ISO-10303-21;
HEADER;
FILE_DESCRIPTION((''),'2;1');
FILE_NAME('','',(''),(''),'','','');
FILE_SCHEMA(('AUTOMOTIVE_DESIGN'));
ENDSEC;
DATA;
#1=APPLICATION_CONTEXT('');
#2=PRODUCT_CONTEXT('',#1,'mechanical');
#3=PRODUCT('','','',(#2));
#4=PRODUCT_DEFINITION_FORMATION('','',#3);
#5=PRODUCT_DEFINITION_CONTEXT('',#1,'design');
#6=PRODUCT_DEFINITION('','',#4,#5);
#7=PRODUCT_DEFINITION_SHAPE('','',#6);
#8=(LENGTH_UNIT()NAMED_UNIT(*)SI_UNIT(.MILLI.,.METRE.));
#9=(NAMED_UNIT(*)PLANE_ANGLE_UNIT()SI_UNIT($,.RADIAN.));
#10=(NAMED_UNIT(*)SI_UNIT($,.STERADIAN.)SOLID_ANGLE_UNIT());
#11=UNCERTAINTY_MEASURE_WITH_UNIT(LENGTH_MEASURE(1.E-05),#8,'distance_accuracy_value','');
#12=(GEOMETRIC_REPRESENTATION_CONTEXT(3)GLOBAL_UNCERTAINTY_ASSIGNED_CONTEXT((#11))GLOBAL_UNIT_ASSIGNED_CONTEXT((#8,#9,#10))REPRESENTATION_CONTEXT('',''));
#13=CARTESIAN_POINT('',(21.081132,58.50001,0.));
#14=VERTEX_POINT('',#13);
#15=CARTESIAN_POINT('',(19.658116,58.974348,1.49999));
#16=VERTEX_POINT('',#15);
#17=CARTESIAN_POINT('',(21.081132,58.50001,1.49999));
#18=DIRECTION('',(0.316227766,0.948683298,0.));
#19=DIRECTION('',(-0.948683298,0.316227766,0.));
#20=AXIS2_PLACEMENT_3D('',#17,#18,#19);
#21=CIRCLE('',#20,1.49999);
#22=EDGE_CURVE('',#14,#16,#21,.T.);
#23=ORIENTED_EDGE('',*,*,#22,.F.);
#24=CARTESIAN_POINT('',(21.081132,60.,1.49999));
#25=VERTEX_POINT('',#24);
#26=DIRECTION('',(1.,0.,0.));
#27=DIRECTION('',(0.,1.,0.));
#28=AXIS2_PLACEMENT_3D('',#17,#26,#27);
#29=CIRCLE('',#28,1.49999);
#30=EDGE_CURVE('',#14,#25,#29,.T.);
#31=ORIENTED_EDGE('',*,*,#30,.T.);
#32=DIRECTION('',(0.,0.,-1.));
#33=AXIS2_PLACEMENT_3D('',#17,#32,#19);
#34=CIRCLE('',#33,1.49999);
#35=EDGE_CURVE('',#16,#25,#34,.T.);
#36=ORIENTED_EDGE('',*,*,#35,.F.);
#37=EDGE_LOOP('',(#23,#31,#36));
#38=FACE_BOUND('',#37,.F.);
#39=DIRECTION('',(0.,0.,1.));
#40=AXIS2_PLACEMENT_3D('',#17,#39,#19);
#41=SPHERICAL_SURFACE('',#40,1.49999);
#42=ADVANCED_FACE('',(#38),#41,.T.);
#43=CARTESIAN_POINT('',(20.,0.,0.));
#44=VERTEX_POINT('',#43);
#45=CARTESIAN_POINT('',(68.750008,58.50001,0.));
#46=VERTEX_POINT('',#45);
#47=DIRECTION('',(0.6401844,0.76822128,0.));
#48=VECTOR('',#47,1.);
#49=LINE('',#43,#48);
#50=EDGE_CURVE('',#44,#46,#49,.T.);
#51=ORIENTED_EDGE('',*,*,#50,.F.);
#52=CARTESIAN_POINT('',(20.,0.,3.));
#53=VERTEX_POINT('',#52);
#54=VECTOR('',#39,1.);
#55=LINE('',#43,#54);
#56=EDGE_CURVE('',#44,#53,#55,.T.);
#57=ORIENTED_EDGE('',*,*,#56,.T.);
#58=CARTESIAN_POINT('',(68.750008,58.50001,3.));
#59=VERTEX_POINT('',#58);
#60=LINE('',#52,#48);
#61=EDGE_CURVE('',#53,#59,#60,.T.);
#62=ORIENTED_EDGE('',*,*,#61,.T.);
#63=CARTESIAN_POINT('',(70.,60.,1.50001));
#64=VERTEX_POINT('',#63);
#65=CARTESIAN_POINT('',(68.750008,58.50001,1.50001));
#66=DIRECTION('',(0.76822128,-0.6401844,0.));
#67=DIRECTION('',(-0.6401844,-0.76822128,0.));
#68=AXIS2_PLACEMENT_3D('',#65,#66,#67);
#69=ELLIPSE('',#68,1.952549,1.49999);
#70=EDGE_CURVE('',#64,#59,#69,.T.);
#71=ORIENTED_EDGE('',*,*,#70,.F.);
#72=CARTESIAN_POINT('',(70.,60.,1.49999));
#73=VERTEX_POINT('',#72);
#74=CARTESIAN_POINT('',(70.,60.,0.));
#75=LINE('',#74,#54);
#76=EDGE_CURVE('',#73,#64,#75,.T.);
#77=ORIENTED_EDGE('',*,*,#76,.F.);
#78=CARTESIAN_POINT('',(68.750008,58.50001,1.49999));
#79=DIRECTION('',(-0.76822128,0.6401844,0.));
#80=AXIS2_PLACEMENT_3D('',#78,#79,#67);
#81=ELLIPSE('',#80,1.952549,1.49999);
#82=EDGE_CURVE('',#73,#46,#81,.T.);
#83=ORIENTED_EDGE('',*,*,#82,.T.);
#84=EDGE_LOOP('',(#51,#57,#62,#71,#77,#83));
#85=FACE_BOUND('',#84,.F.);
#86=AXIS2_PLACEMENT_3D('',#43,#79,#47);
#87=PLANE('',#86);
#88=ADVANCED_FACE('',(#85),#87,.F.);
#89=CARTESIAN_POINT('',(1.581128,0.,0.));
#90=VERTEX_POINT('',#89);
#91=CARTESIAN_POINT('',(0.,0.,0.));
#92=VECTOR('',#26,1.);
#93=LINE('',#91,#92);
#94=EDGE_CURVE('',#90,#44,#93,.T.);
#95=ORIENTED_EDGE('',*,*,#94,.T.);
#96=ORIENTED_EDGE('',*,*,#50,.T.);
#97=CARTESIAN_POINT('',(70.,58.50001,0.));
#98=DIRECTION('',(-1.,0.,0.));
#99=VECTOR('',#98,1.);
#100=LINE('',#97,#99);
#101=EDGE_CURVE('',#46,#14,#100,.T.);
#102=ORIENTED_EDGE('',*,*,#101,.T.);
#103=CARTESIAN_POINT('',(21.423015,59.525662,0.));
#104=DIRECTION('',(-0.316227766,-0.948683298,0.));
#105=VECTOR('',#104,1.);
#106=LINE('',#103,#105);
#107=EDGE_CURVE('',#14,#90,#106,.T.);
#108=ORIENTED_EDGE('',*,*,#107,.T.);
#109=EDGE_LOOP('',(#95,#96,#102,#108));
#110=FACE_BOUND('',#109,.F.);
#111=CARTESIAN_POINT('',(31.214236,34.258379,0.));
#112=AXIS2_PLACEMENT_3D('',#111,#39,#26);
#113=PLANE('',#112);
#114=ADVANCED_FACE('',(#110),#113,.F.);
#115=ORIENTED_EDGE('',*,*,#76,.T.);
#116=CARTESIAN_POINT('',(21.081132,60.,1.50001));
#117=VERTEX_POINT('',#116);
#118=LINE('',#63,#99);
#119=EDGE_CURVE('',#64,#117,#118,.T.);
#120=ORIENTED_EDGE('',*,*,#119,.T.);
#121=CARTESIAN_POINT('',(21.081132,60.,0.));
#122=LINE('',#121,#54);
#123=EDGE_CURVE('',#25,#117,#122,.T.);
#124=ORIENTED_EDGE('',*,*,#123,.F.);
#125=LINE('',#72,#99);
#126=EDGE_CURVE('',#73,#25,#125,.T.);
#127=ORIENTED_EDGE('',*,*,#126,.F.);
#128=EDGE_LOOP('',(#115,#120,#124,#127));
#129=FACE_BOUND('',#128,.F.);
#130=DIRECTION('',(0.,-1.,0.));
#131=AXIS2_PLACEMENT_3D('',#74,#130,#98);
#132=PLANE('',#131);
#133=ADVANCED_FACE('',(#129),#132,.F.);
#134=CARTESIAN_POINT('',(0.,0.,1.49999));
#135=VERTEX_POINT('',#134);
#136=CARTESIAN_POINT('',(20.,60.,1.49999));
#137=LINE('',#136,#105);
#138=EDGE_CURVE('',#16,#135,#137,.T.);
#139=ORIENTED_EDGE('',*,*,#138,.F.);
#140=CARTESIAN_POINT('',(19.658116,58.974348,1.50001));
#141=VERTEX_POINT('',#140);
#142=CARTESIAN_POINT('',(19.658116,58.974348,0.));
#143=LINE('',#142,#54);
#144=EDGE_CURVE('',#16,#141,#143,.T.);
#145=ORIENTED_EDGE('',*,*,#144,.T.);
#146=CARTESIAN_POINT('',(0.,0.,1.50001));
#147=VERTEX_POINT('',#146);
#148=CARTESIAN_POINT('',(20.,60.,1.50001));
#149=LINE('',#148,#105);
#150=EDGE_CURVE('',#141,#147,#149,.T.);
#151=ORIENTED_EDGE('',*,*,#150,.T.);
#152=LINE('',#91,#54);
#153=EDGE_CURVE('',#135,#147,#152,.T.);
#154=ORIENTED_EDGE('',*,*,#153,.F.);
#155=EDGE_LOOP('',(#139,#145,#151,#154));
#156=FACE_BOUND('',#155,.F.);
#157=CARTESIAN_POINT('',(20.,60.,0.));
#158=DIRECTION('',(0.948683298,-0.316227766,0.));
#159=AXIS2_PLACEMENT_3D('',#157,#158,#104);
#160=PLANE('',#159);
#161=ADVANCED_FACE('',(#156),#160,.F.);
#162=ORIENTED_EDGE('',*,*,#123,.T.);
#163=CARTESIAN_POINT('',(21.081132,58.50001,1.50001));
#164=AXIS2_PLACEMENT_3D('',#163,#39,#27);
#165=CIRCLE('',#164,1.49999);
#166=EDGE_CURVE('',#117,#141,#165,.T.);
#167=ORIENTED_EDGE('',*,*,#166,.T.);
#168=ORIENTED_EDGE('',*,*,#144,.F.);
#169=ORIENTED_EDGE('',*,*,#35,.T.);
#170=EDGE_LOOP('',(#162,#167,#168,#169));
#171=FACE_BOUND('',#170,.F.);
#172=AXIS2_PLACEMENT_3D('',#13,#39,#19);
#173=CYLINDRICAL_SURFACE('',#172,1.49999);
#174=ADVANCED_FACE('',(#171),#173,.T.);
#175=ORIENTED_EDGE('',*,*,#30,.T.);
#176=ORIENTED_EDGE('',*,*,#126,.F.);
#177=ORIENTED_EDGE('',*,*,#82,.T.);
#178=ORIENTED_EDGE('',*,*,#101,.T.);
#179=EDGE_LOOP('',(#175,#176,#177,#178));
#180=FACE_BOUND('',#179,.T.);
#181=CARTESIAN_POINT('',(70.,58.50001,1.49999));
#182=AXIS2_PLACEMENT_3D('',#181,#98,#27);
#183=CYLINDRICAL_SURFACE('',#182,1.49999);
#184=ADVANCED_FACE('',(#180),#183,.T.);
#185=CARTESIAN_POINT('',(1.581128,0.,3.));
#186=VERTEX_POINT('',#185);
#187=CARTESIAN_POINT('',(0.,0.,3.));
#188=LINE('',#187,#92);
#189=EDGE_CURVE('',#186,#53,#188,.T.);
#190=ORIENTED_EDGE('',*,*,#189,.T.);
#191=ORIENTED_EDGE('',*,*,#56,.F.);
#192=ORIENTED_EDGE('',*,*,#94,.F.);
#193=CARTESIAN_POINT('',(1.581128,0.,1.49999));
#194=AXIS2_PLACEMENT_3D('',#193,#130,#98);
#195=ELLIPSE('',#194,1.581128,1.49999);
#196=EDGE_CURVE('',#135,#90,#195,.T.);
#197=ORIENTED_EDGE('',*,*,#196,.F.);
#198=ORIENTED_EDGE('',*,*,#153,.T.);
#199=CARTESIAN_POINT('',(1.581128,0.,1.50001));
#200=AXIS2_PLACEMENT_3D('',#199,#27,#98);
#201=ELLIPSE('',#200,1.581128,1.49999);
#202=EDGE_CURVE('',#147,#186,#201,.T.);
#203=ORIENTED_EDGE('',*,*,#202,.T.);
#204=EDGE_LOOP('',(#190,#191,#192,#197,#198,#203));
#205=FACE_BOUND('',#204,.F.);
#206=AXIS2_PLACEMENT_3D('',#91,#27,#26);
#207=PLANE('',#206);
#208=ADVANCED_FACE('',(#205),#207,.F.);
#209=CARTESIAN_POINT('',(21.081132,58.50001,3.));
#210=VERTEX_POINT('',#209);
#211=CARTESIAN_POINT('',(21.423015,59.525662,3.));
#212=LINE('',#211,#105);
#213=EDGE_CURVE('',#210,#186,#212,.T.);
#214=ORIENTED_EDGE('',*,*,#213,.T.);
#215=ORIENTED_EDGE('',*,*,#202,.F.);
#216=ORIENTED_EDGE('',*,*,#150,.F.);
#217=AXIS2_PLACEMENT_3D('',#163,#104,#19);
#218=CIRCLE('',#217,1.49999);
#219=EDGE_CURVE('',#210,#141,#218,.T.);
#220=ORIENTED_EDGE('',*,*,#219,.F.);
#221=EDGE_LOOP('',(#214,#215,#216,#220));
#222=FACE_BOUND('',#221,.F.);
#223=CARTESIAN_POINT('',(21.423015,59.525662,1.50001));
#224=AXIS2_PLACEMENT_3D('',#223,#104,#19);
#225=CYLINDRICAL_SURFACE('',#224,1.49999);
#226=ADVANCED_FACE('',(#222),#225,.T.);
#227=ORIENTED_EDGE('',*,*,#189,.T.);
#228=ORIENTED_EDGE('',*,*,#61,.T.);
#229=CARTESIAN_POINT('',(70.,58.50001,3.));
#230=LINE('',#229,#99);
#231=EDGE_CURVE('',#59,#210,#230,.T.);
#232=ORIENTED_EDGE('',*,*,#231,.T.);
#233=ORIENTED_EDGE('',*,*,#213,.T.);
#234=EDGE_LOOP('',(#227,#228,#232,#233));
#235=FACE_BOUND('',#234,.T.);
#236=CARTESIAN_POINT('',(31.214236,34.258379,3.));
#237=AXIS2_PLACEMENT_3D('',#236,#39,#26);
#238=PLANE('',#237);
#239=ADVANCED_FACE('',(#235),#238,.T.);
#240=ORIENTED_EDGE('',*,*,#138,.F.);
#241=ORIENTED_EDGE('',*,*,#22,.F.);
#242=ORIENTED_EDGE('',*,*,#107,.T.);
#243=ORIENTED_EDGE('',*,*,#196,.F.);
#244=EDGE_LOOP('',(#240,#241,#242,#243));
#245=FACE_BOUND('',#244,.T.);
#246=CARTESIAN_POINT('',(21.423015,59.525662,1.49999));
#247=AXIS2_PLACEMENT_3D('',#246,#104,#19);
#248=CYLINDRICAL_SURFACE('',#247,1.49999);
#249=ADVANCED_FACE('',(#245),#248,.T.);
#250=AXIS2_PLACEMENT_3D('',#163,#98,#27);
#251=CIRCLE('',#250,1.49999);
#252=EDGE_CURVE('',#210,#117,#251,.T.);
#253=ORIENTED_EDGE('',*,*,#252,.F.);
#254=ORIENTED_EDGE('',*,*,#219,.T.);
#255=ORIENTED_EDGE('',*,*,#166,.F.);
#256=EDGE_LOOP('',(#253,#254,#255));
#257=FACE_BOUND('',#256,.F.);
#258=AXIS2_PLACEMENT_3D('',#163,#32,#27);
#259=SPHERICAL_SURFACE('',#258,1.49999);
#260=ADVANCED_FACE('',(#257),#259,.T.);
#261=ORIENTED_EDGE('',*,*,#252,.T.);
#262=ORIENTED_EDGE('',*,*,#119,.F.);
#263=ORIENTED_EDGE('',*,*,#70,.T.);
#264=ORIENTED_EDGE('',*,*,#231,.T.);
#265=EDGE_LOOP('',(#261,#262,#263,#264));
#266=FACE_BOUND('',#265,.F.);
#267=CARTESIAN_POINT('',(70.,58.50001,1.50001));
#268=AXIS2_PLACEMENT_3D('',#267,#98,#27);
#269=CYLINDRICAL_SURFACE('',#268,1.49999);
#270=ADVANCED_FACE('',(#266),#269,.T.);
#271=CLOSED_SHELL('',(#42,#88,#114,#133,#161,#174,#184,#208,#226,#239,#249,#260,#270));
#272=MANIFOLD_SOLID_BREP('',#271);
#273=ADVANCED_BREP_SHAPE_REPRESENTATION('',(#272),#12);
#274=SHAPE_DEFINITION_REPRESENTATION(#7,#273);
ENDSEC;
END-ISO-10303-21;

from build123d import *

# Parameters (mm, degrees)
F1_DEPTH = 3
F2_R     = 1.49999


# Not quite as in the source:
# - a fillet or chamfer is up to 0.001 mm smaller than in the source, because OpenCascade refuses the exact size


with BuildPart() as f1:
    # F0 (on Top) → F1 (new body)
    with BuildSketch(Plane.XY):
        Polygon((20, 60), (0, 0), (20, 0), (70, 60), align=None)
    extrude(amount=F1_DEPTH)

    # F2 (radius 1.5 in the source; OpenCascade refuses exactly that, so slightly less here)
    f2_edges = [f1.edges().sort_by_distance(p)[0] for p in [
        (45, 60, 3),
        (10, 30, 0),
        (10, 30, 3),
        (45, 60, 0),
        (20, 60, 1.5),
    ]]
    fillet(f2_edges, radius=F2_R)


solid = f1.part
